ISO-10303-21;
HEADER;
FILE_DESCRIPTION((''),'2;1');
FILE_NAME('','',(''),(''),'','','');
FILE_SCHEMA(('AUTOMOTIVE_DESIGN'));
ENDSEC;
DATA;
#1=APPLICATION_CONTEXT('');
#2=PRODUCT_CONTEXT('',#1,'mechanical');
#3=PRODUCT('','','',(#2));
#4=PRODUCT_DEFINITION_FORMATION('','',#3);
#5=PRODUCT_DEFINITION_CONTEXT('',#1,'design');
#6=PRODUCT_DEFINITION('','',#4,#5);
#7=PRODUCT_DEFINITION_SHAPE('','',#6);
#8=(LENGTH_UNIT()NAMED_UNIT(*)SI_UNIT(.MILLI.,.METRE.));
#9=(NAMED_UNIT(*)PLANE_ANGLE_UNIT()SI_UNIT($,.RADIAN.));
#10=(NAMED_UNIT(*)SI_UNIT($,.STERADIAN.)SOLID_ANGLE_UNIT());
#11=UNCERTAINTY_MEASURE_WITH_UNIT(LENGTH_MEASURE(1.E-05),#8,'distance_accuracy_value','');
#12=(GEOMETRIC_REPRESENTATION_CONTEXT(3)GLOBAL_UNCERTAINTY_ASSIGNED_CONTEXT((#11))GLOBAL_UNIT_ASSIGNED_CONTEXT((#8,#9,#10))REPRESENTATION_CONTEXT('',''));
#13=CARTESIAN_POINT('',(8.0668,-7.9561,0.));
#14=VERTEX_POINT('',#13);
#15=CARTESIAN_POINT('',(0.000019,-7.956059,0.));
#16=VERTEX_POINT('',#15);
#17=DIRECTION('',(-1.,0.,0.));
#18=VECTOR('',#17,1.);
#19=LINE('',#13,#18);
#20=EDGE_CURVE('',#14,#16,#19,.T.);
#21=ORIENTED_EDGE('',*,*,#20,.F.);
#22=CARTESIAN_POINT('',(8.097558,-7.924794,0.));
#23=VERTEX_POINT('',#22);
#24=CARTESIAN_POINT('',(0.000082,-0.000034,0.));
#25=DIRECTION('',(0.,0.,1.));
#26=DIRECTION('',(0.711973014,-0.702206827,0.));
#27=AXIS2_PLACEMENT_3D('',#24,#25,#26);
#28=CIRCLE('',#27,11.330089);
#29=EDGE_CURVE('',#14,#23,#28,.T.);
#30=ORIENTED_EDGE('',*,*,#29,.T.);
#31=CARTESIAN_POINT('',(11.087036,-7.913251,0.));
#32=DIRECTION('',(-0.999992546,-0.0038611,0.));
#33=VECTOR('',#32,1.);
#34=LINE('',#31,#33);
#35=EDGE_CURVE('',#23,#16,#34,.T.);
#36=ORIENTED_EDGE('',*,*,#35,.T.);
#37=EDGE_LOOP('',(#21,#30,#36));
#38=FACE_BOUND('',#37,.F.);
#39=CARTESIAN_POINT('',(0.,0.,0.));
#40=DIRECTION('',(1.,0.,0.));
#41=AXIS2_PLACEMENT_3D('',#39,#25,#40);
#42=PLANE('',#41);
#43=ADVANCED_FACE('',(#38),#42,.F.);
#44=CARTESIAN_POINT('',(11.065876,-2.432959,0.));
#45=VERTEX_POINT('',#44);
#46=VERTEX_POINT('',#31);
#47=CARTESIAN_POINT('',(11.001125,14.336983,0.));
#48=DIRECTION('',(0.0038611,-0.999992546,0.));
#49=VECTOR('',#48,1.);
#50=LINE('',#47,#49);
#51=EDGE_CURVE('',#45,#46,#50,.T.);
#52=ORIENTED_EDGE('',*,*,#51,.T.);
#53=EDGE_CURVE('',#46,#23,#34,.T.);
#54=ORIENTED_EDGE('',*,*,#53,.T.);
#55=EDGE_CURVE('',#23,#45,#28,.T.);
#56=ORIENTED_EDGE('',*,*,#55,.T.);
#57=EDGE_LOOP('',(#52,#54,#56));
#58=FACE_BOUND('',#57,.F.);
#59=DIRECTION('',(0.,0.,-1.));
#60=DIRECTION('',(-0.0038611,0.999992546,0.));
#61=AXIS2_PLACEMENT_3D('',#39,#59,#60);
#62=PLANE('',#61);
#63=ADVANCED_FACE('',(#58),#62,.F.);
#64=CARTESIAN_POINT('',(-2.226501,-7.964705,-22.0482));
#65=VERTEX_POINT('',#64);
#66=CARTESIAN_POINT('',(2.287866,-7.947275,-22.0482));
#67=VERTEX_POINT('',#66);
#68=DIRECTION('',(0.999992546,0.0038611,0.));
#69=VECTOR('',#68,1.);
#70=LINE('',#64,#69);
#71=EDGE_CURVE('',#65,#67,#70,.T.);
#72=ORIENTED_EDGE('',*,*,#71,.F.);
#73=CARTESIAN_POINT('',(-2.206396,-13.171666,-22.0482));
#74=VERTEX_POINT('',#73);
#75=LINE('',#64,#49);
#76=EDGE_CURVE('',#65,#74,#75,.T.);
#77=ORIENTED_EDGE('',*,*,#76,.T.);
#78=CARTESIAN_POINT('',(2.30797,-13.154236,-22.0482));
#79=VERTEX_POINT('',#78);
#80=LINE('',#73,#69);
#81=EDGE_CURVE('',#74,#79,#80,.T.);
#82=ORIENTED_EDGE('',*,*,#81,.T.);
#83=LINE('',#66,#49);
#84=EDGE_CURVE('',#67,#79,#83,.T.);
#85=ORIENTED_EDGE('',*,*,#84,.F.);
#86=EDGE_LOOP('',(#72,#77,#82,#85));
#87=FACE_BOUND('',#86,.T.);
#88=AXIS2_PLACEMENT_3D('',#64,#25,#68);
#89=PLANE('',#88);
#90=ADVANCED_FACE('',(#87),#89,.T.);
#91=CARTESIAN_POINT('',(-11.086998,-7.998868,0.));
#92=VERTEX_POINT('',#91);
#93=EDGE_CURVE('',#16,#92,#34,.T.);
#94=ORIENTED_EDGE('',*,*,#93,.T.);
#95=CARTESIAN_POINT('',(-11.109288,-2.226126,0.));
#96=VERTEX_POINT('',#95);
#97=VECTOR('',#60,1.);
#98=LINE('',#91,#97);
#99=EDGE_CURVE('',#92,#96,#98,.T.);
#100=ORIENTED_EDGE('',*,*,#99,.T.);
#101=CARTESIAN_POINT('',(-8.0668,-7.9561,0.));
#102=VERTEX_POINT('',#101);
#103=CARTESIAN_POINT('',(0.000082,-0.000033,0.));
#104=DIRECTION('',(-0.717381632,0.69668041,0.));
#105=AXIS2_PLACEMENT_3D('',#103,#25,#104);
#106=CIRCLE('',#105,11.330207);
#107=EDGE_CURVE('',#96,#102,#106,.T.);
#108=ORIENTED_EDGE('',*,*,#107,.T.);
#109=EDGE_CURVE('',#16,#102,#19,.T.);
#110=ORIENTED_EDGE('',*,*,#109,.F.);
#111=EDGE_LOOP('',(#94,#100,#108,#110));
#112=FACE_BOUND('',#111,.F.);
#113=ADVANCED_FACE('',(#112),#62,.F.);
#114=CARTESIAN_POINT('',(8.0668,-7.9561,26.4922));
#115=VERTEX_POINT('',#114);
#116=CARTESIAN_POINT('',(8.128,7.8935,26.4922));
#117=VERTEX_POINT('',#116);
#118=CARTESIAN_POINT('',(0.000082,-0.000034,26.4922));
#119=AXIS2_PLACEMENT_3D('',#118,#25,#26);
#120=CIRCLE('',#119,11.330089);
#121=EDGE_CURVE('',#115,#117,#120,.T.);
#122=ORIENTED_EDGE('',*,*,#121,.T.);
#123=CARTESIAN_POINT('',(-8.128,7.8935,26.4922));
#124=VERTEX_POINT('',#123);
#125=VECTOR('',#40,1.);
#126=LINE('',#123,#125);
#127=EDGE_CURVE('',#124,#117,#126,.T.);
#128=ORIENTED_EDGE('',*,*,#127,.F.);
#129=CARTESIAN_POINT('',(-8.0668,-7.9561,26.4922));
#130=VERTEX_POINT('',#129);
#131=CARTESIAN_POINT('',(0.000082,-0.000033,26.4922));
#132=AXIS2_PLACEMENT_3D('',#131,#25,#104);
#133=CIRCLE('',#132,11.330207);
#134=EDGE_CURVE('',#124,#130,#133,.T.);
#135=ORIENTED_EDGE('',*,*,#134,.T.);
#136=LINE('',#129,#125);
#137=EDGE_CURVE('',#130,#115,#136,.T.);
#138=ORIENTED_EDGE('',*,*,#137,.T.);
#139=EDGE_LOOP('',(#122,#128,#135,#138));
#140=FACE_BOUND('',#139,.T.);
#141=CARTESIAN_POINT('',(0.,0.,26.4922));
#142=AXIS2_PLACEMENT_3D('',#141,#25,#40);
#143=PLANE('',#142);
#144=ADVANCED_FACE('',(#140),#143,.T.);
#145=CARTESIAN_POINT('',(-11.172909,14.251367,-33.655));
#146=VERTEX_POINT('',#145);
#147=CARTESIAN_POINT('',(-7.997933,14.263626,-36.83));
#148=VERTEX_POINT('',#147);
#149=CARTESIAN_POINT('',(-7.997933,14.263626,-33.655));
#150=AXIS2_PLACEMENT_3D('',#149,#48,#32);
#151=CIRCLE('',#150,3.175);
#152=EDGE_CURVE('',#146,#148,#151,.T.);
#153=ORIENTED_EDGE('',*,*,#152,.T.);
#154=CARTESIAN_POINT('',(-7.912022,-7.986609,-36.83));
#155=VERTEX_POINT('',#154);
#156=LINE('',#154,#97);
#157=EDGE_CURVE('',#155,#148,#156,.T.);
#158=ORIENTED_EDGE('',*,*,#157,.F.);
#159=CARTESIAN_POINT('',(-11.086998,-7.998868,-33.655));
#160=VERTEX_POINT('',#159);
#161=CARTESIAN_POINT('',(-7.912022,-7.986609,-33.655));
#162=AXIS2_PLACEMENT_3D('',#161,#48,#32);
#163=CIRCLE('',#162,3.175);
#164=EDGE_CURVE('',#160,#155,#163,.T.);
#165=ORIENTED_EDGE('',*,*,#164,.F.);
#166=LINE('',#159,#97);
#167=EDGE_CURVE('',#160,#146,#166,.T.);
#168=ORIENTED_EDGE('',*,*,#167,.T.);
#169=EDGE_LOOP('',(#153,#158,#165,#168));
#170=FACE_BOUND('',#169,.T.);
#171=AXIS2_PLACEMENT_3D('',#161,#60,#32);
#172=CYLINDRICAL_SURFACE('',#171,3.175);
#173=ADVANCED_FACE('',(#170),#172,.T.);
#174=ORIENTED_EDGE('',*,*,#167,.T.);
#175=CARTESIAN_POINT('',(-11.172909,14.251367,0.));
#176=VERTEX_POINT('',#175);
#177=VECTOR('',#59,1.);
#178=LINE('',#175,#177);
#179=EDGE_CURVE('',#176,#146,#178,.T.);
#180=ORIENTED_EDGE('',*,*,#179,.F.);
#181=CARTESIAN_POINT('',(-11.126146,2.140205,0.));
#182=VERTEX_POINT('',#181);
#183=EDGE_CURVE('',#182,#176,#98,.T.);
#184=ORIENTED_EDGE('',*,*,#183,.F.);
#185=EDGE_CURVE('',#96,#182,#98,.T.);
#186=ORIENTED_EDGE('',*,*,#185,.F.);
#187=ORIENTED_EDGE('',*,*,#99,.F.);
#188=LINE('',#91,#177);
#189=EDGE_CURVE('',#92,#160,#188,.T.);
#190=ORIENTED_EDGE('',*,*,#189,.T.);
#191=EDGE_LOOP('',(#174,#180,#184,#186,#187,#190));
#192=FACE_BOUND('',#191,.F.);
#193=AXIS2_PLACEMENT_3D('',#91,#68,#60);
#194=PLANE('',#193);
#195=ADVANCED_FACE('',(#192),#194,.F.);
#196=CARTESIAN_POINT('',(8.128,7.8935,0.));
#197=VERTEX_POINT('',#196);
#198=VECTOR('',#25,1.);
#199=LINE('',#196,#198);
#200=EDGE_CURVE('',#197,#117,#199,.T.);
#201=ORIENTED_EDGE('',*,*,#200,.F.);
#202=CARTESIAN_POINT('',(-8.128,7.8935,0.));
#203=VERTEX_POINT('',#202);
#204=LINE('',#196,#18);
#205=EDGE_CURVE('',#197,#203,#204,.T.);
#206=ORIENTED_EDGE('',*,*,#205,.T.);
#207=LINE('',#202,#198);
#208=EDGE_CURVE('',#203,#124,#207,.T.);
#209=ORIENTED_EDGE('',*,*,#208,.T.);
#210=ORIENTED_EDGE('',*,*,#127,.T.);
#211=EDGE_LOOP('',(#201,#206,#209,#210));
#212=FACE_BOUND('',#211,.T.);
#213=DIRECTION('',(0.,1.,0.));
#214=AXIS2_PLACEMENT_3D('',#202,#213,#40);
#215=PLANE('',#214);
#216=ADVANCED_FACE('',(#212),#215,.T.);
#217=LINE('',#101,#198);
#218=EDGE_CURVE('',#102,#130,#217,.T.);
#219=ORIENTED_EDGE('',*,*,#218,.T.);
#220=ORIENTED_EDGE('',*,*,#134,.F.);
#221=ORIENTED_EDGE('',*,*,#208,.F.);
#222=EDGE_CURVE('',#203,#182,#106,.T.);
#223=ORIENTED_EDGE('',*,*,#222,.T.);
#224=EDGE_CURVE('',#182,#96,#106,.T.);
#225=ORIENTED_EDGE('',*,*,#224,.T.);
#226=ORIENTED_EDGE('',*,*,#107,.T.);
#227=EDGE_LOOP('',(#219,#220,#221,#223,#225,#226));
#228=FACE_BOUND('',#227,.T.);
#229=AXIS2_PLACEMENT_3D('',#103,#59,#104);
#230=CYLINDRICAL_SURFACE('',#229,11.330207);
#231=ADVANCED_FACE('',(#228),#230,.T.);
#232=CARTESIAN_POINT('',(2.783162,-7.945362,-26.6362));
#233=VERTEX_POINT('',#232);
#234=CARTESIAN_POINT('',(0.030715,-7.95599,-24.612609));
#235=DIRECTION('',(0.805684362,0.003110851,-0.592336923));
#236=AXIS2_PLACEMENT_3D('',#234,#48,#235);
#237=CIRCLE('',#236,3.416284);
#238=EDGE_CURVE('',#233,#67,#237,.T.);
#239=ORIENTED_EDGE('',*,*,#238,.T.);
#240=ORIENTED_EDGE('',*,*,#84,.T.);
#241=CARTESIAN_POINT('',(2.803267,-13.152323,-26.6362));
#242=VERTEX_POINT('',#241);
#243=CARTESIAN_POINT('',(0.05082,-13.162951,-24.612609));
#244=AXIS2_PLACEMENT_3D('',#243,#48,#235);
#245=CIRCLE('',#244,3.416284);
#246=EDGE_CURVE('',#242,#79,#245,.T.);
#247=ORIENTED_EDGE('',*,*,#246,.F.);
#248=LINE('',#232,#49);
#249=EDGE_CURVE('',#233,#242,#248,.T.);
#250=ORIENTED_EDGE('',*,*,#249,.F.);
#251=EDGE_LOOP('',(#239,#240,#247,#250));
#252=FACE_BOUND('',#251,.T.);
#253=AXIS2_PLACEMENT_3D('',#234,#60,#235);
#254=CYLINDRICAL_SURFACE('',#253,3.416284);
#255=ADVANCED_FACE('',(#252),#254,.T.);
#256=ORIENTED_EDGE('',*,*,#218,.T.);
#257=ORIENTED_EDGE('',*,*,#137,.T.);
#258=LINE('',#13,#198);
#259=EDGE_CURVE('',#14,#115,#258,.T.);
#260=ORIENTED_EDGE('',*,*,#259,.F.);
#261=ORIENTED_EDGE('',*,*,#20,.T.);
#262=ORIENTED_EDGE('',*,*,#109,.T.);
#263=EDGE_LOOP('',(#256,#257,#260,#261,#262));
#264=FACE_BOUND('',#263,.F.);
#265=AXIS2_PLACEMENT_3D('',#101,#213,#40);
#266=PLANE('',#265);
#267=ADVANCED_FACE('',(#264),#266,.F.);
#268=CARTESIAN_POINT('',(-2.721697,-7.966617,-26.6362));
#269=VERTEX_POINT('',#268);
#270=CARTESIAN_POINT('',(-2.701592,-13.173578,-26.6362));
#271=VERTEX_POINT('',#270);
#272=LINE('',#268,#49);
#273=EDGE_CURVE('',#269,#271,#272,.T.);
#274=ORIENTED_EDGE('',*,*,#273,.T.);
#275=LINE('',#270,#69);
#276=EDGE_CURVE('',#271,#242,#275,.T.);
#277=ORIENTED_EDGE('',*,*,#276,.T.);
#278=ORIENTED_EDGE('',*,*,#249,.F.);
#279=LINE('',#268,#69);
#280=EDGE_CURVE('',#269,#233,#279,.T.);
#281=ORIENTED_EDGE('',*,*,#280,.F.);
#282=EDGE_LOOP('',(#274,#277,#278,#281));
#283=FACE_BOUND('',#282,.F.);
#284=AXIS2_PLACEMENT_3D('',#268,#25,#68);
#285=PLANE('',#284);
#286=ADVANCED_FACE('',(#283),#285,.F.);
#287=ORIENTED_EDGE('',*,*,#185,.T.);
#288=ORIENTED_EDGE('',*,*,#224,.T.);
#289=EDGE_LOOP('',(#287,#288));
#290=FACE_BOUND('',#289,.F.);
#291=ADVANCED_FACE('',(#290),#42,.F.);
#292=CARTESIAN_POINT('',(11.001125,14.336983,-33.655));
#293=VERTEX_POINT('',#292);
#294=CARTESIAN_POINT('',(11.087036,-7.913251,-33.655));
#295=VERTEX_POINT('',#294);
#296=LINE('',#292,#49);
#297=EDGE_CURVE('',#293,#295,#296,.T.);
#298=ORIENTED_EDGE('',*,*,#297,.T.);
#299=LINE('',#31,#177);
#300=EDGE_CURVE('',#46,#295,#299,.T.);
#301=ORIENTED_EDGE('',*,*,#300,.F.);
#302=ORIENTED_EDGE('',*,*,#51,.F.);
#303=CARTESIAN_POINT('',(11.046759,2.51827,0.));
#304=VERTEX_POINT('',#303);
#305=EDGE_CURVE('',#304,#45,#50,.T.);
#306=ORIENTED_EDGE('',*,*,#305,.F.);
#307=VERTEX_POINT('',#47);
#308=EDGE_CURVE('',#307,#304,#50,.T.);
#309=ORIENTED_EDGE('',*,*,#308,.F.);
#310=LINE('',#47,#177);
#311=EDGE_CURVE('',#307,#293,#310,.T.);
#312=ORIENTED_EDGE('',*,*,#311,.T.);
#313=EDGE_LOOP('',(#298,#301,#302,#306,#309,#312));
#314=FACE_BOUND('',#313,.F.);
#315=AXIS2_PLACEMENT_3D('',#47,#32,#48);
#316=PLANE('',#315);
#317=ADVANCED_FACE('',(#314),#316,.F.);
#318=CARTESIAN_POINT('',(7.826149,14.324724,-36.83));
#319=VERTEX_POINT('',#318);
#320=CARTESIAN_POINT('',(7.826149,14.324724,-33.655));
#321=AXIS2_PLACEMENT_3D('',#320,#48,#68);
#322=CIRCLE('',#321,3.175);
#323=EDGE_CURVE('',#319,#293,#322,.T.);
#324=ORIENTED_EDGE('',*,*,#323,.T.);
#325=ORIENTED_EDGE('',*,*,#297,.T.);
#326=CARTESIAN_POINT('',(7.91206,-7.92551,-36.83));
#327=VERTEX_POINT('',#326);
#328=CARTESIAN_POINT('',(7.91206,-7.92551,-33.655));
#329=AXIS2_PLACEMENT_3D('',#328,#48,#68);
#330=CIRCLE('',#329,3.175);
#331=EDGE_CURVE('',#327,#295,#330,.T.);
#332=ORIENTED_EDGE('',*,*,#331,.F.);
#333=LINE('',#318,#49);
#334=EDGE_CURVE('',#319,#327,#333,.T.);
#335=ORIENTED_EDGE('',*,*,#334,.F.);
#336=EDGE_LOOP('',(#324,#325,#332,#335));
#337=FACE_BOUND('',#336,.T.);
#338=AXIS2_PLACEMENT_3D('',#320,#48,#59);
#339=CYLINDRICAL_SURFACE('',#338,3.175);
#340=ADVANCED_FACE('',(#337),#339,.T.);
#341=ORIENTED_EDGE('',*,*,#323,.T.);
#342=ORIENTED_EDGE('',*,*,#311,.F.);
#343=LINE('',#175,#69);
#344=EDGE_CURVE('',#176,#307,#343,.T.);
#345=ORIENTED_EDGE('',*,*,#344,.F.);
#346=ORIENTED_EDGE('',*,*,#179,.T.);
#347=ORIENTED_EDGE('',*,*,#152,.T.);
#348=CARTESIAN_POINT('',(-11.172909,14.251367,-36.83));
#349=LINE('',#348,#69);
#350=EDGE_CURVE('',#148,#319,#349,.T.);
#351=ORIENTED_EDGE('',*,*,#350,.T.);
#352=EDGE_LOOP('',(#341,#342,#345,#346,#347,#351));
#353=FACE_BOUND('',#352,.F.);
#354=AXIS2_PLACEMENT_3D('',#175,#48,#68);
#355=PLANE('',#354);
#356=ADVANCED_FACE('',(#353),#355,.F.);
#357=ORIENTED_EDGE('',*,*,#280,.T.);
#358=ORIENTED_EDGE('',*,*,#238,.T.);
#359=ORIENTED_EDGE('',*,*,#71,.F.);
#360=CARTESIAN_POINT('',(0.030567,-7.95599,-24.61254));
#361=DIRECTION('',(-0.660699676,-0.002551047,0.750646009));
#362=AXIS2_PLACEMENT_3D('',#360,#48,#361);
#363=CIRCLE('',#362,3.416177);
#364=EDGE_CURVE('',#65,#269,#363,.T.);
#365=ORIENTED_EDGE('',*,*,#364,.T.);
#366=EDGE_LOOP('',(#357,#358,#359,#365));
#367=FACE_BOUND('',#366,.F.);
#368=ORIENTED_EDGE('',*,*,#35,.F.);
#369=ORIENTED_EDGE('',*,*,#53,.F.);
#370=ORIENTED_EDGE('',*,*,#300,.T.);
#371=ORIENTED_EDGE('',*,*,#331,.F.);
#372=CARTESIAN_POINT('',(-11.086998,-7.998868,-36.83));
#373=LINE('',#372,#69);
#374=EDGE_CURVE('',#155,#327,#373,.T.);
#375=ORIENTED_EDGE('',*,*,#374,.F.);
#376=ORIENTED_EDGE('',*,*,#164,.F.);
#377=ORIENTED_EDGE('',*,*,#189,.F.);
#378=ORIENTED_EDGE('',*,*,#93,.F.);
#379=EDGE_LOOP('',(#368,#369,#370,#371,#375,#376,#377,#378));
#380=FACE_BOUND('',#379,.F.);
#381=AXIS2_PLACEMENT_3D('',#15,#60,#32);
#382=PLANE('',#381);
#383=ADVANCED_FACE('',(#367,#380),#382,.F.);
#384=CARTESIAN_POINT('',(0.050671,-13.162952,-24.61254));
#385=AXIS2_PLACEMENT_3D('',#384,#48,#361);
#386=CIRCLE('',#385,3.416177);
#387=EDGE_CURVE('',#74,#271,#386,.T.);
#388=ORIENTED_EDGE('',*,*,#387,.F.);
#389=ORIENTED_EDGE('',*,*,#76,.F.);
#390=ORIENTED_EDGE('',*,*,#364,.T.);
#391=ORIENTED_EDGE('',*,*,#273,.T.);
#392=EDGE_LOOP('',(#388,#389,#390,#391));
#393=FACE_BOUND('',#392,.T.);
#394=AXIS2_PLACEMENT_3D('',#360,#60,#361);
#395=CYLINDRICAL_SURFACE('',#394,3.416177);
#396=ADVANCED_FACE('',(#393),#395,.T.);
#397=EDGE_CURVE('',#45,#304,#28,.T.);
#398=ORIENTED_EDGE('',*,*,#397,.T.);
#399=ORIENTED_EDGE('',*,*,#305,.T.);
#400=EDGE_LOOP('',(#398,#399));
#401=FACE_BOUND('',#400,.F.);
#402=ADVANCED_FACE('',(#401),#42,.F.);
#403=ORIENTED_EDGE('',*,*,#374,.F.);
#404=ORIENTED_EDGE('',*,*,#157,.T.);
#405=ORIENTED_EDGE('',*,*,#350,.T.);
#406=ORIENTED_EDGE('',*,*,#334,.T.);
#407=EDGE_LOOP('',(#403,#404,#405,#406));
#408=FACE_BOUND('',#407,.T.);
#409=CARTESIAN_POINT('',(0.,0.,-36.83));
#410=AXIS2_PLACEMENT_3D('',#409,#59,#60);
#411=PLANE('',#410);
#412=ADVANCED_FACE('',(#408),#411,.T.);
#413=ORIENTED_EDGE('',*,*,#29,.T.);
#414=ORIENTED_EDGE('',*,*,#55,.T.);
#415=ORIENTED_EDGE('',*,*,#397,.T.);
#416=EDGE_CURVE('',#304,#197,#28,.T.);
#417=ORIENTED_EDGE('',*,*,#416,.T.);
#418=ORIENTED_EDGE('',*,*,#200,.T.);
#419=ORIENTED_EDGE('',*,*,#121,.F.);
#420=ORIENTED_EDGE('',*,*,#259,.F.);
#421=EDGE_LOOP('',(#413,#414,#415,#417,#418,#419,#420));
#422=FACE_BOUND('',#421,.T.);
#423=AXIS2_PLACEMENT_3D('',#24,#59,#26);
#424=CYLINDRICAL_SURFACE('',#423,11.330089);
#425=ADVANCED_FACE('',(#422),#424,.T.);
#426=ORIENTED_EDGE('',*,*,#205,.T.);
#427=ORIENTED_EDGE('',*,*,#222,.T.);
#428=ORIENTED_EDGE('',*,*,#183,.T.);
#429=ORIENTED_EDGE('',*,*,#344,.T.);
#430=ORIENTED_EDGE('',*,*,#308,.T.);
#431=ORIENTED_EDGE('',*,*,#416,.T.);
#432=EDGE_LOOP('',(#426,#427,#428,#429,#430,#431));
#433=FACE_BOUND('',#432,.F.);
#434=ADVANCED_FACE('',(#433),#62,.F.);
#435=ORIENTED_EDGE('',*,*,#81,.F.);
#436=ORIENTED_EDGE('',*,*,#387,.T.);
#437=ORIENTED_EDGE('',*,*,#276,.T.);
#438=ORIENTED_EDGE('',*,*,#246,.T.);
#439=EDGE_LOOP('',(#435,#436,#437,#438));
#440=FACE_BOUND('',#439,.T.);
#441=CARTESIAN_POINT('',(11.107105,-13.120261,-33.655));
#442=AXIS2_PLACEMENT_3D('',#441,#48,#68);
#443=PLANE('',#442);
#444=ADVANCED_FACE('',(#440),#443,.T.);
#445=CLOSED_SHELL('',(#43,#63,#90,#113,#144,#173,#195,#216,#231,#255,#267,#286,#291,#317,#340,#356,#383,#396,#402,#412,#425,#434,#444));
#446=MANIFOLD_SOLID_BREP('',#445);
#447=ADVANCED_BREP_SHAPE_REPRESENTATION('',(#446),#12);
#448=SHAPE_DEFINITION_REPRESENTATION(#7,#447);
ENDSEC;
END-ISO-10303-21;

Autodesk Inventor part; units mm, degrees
ref_plane "YZ Plane" through (0, 0, 0) normal (1, 0, 0) x (0, 1, 0)
ref_plane "XZ Plane" through (0, 0, 0) normal (0, 1, 0) x (-1, 0, 0)
ref_plane "XY Plane" through (0, 0, 0) normal (0, 0, 1) x (1, 0, 0)
sketch "Sketch1" plane through (0, 0, 0) normal (0, 0, 1) x (1, 0, 0)
  line L0 (-8.128, 7.8935) -> (8.128, 7.8935)
  line L1 (-8.0668, -7.9561) -> (8.0668, -7.9561)
  arc A0 (-8.128, 7.8935) -> (-8.0668, -7.9561) centre (0, 0) ccw
  arc A1 (8.0668, -7.9561) -> (8.128, 7.8935) centre (0, 0) ccw
  line L2 (0, 7.8935) -> (0, -7.9561)
  dimension "d8" = 15.8496
  dimension "d9" = 16.256
extrude "Extrusion1" add sketch "Sketch1" along normal blind 26.4922
sketch "Sketch2" plane through (0, 0, 0) normal (0, 0, -1) x (-0.0038611, 0.9999925, 0)
  line L0 (-7.956, -11.1178) -> (14.2944, -11.1178)
  line L1 (14.2944, -11.1178) -> (14.2944, 11.0564)
  line L2 (14.2944, 11.0564) -> (-7.956, 11.0564)
  line L3 (-7.956, 11.0564) -> (-7.956, -11.1178)
  line L4 (-4.7868, -0.0614) -> (-7.956, -0.0307)
  point P0 (0, 0)
  dimension "d3" = 22.2504
  dimension "d4" = 22.1742
extrude "Extrusion2" add sketch "Sketch2" along normal blind 36.83
fillet "Fillet1" radius 3.175 2 edges at (-11.13, 3.1262, -36.83) (11.0441, 3.2119, -36.83)
sketch "Sketch4" plane through (0, 0, 26.4922) normal (0, 0, 1) x (0.0038611, -0.9999925, 0)
  point P0 (0, 0)
  point P1 (-14.2944, -11.1178)
sketch "Sketch6" plane through (11.087, -7.9133, -33.655) normal (0.0038611, -0.9999925, 0) x (0.9999925, 0.0038611, 0)
  line L0 (-13.3136, 11.6068) -> (-8.7992, 11.6068)
  line L1 (-13.8088, 7.0188) -> (-8.3039, 7.0188)
  arc A0 (-13.3136, 11.6068) -> (-13.8088, 7.0188) centre (-11.0564, 9.0424) ccw
  arc A1 (-8.3039, 7.0188) -> (-8.7992, 11.6068) centre (-11.0564, 9.0424) ccw
  point P0 (-11.0564, 33.655)
extrude "Extrusion3" add sketch "Sketch6" along normal blind 5.207
properties part number "cwmotor"
